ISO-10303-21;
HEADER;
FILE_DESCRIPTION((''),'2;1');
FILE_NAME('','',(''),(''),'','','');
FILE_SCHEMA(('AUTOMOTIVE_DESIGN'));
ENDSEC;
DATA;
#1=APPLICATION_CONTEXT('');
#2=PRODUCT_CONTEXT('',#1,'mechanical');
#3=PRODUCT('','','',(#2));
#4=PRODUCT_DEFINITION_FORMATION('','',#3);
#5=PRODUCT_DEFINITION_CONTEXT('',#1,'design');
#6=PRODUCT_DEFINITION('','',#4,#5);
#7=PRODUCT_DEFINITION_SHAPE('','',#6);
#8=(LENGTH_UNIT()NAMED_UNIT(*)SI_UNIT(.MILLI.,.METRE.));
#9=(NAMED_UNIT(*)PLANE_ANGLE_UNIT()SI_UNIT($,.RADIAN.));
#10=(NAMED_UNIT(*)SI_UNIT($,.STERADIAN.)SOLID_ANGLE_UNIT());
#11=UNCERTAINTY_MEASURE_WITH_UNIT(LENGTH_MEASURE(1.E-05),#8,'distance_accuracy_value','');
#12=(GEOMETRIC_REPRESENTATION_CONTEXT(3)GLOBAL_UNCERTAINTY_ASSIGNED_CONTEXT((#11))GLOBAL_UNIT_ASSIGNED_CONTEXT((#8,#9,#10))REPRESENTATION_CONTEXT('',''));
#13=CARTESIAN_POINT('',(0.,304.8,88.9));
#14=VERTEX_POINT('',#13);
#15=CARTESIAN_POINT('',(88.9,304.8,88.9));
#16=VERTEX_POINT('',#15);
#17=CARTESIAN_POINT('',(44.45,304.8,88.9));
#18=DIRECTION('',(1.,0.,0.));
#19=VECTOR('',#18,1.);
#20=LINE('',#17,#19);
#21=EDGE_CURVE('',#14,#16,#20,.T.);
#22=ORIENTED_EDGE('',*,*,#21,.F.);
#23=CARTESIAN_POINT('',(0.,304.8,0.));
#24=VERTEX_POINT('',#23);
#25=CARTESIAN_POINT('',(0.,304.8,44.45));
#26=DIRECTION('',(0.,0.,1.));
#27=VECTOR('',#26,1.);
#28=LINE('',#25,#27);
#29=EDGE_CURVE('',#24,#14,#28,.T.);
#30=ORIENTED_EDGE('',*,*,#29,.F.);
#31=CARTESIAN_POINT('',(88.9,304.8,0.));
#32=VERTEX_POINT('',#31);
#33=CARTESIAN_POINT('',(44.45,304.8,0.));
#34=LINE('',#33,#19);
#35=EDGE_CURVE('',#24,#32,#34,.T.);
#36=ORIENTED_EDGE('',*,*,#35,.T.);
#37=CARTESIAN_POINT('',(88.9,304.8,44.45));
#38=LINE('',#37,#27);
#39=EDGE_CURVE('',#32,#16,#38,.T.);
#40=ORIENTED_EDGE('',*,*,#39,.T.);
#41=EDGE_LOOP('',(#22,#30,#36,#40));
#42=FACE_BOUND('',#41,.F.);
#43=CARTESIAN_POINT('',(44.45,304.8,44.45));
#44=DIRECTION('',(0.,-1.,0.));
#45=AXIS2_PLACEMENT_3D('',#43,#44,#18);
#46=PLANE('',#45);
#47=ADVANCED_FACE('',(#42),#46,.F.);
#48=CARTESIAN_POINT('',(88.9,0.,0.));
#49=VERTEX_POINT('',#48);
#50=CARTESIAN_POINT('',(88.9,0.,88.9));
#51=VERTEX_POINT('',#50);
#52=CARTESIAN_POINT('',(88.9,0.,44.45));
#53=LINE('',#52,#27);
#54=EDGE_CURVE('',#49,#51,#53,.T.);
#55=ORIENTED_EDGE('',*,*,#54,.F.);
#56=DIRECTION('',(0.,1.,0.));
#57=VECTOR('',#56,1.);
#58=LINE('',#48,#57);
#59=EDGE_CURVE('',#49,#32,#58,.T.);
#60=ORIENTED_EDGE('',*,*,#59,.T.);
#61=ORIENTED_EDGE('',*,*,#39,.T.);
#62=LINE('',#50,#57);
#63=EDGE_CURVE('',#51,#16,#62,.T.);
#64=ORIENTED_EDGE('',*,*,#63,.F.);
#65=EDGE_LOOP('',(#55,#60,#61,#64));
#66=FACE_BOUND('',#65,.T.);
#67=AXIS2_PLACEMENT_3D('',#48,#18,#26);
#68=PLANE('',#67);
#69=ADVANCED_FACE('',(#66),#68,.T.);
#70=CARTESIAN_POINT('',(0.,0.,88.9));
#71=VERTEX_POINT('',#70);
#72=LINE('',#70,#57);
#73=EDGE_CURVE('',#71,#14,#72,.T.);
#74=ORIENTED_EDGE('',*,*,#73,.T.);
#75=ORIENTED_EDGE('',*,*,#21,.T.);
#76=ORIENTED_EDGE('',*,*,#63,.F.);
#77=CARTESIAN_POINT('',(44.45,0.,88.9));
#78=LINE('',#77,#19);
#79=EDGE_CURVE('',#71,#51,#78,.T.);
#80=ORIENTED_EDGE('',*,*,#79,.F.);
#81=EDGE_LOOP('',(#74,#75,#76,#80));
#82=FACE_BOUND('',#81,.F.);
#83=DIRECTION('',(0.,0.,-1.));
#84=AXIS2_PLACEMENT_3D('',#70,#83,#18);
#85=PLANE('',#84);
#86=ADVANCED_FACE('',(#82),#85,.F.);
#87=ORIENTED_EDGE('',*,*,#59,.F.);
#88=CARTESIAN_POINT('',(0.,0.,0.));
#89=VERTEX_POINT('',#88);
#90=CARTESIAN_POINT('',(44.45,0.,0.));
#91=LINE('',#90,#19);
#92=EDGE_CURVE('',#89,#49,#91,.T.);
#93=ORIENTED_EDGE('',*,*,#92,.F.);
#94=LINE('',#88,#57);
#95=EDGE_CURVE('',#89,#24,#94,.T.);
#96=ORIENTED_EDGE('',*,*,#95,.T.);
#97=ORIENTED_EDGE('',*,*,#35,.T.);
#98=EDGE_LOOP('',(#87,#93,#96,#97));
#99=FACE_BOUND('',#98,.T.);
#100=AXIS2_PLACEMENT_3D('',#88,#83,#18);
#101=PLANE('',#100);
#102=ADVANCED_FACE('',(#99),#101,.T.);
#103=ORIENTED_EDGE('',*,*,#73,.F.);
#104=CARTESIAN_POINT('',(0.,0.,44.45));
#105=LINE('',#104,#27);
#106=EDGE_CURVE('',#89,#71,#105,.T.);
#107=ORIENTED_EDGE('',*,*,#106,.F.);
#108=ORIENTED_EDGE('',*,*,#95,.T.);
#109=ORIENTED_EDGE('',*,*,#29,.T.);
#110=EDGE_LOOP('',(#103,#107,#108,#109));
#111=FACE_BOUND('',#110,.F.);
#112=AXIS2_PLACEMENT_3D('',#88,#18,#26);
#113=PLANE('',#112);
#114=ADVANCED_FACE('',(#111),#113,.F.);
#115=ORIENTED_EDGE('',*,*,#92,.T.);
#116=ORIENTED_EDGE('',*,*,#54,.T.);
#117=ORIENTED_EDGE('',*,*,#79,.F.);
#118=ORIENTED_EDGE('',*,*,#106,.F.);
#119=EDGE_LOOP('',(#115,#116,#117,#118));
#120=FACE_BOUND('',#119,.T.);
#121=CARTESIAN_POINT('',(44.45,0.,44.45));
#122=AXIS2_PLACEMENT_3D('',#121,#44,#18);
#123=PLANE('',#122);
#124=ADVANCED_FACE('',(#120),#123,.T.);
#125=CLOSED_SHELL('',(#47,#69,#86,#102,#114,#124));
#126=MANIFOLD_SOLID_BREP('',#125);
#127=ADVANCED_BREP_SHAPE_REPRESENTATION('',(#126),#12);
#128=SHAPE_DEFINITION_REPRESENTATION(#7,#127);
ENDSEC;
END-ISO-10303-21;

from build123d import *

# Parameters (mm, degrees)
F0_W     = 88.9
F0_H     = 88.9
F2_DEPTH = 304.8


# Not quite as in the source:
# - a variable given as a bare number and used for a length is read in inches; the dataset says mm whatever the document's units were


with BuildPart() as f2:
    # F0 (on Front) → F2 (new body)
    with BuildSketch(Plane.XZ):
        with Locations((44.45, 44.45)):
            Rectangle(F0_W, F0_H)
    extrude(amount=-F2_DEPTH)


solid = f2.part
